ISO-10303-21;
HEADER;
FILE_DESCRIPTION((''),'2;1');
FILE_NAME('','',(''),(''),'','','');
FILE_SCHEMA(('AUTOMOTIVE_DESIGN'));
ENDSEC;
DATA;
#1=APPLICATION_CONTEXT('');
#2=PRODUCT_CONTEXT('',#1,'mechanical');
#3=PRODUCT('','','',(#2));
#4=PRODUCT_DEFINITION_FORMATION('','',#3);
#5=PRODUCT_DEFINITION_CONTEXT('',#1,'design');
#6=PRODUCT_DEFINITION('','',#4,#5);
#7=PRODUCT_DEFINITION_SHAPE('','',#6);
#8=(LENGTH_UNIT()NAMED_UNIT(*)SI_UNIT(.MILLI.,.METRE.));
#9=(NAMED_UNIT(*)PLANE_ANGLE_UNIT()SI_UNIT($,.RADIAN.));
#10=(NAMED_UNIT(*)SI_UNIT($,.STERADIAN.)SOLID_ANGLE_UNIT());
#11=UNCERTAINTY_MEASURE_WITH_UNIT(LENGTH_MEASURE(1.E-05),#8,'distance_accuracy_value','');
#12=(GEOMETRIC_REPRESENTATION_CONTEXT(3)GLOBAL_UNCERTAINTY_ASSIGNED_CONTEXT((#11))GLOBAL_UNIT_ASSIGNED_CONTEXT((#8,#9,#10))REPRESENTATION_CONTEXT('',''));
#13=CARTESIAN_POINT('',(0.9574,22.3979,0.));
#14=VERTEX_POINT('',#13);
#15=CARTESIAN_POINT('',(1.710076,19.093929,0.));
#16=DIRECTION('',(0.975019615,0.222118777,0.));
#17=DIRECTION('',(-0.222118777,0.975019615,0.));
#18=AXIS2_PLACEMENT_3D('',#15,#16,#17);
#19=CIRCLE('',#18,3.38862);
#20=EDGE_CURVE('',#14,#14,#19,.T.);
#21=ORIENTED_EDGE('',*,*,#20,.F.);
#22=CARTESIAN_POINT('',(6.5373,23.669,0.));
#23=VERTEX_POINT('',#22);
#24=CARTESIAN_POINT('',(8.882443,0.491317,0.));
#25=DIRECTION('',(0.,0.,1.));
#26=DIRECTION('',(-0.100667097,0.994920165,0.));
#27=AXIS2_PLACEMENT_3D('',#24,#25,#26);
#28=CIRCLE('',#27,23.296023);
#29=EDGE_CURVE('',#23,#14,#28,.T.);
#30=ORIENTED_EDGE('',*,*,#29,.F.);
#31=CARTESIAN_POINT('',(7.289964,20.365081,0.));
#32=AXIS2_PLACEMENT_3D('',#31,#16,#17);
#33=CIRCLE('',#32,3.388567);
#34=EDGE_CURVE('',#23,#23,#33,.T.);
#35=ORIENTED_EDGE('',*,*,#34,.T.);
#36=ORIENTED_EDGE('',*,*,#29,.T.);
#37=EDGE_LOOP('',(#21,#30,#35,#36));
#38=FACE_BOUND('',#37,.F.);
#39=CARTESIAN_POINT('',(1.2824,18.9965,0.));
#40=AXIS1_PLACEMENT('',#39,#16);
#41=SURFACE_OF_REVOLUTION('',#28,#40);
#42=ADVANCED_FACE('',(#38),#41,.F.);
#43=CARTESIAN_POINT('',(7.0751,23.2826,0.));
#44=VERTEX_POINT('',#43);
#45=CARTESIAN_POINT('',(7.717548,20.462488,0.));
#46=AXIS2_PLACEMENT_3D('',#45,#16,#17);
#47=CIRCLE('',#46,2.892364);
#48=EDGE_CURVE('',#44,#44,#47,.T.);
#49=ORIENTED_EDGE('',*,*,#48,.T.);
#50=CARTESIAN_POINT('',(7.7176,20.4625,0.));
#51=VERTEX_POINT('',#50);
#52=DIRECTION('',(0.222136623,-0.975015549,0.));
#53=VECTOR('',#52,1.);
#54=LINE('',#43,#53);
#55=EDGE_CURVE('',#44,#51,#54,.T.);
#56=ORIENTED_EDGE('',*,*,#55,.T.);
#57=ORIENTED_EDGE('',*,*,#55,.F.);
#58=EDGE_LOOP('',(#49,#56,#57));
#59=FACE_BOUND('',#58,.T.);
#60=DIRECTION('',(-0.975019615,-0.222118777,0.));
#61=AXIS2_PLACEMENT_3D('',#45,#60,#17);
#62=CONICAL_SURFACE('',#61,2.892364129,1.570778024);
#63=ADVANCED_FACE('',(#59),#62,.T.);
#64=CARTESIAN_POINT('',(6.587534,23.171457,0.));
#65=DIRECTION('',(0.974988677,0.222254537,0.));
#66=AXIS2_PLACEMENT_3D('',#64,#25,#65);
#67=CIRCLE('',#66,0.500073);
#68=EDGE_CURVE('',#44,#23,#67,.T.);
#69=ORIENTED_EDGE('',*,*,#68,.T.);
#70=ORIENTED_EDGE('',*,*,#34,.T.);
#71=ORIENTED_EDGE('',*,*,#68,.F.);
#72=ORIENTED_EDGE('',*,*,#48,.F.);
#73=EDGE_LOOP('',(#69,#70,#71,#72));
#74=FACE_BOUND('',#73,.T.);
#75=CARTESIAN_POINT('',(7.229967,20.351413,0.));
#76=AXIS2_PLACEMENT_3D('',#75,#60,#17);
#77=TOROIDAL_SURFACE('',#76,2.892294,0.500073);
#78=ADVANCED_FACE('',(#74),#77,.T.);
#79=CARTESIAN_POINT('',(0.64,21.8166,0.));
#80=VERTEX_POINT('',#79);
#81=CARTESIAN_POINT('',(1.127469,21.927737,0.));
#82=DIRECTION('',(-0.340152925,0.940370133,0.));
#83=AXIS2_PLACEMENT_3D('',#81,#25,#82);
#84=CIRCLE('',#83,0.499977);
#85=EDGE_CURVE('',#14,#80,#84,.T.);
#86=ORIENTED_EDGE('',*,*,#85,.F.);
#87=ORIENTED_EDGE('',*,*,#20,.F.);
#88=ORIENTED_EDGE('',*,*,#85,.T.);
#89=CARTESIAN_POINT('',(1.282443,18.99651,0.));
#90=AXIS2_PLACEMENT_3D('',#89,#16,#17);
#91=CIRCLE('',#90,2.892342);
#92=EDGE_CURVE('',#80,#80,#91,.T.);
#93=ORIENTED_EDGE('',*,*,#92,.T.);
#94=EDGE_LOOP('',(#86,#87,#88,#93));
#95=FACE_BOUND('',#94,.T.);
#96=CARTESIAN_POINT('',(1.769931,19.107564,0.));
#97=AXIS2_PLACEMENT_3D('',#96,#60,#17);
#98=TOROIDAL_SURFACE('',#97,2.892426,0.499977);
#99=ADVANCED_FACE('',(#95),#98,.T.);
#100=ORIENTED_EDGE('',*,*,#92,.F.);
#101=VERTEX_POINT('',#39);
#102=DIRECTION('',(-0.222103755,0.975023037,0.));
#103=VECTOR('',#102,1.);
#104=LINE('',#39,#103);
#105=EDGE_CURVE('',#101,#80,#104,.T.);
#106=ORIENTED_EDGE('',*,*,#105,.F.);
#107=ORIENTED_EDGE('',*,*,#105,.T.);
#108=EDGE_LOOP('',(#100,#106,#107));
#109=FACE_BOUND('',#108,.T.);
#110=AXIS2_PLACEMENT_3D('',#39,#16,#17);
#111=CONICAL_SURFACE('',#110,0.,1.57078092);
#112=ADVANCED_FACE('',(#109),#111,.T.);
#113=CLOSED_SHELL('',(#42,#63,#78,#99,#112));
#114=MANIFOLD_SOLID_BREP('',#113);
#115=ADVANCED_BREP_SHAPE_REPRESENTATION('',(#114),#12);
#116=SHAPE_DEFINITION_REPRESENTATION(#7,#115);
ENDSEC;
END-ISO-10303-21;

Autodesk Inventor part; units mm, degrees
sketch "Sketch_2" plane through (0, 0, 0) normal (0, 0, 1) x (1, 0, 0)
  line L0 (7.7176, 20.4625) -> (1.2824, 18.9965)
  line L1 (1.2824, 18.9965) -> (0.64, 21.8166)
  arc A0 (0.9574, 22.3979) -> (0.64, 21.8166) centre (1.1275, 21.9277) ccw
  arc A1 (6.5373, 23.669) -> (0.9574, 22.3979) centre (8.8822, 0.4928) ccw
  arc A2 (7.0751, 23.2826) -> (6.5373, 23.669) centre (6.5876, 23.1715) ccw
  line L2 (7.0751, 23.2826) -> (7.7176, 20.4625)
  line L3 (7.7176, 20.4625) -> (1.2824, 18.9965)
revolve "Revolution1" add sketch "Sketch_2" angle 360 about axis through (7.7176, 20.4625, 0) along (0.9750204, 0.2221152, 0)
ref_plane "NO_GEO_XY" through (0, 0, 0) normal (1, 0, 0) x (0, 0, -1)
ref_plane "NO_GEO_YZ" through (0, 0, 0) normal (0, 0, -1) x (0, 1, 0)
ref_plane "NO_GEO_ZX" through (0, 0, 0) normal (0, 1, 0) x (1, 0, 0)
ref_plane "roller1_XY" through (0, 19.7295, 0) normal (1, 0, 0) x (0, 0, -1)
ref_plane "roller1_YZ" through (0, 19.7295, 0) normal (0, 0, -1) x (0, 1, 0)
ref_plane "roller1_ZX" through (0, 19.7295, 0) normal (0, 1, 0) x (1, 0, 0)
properties part number "22205/20 E_r1"
